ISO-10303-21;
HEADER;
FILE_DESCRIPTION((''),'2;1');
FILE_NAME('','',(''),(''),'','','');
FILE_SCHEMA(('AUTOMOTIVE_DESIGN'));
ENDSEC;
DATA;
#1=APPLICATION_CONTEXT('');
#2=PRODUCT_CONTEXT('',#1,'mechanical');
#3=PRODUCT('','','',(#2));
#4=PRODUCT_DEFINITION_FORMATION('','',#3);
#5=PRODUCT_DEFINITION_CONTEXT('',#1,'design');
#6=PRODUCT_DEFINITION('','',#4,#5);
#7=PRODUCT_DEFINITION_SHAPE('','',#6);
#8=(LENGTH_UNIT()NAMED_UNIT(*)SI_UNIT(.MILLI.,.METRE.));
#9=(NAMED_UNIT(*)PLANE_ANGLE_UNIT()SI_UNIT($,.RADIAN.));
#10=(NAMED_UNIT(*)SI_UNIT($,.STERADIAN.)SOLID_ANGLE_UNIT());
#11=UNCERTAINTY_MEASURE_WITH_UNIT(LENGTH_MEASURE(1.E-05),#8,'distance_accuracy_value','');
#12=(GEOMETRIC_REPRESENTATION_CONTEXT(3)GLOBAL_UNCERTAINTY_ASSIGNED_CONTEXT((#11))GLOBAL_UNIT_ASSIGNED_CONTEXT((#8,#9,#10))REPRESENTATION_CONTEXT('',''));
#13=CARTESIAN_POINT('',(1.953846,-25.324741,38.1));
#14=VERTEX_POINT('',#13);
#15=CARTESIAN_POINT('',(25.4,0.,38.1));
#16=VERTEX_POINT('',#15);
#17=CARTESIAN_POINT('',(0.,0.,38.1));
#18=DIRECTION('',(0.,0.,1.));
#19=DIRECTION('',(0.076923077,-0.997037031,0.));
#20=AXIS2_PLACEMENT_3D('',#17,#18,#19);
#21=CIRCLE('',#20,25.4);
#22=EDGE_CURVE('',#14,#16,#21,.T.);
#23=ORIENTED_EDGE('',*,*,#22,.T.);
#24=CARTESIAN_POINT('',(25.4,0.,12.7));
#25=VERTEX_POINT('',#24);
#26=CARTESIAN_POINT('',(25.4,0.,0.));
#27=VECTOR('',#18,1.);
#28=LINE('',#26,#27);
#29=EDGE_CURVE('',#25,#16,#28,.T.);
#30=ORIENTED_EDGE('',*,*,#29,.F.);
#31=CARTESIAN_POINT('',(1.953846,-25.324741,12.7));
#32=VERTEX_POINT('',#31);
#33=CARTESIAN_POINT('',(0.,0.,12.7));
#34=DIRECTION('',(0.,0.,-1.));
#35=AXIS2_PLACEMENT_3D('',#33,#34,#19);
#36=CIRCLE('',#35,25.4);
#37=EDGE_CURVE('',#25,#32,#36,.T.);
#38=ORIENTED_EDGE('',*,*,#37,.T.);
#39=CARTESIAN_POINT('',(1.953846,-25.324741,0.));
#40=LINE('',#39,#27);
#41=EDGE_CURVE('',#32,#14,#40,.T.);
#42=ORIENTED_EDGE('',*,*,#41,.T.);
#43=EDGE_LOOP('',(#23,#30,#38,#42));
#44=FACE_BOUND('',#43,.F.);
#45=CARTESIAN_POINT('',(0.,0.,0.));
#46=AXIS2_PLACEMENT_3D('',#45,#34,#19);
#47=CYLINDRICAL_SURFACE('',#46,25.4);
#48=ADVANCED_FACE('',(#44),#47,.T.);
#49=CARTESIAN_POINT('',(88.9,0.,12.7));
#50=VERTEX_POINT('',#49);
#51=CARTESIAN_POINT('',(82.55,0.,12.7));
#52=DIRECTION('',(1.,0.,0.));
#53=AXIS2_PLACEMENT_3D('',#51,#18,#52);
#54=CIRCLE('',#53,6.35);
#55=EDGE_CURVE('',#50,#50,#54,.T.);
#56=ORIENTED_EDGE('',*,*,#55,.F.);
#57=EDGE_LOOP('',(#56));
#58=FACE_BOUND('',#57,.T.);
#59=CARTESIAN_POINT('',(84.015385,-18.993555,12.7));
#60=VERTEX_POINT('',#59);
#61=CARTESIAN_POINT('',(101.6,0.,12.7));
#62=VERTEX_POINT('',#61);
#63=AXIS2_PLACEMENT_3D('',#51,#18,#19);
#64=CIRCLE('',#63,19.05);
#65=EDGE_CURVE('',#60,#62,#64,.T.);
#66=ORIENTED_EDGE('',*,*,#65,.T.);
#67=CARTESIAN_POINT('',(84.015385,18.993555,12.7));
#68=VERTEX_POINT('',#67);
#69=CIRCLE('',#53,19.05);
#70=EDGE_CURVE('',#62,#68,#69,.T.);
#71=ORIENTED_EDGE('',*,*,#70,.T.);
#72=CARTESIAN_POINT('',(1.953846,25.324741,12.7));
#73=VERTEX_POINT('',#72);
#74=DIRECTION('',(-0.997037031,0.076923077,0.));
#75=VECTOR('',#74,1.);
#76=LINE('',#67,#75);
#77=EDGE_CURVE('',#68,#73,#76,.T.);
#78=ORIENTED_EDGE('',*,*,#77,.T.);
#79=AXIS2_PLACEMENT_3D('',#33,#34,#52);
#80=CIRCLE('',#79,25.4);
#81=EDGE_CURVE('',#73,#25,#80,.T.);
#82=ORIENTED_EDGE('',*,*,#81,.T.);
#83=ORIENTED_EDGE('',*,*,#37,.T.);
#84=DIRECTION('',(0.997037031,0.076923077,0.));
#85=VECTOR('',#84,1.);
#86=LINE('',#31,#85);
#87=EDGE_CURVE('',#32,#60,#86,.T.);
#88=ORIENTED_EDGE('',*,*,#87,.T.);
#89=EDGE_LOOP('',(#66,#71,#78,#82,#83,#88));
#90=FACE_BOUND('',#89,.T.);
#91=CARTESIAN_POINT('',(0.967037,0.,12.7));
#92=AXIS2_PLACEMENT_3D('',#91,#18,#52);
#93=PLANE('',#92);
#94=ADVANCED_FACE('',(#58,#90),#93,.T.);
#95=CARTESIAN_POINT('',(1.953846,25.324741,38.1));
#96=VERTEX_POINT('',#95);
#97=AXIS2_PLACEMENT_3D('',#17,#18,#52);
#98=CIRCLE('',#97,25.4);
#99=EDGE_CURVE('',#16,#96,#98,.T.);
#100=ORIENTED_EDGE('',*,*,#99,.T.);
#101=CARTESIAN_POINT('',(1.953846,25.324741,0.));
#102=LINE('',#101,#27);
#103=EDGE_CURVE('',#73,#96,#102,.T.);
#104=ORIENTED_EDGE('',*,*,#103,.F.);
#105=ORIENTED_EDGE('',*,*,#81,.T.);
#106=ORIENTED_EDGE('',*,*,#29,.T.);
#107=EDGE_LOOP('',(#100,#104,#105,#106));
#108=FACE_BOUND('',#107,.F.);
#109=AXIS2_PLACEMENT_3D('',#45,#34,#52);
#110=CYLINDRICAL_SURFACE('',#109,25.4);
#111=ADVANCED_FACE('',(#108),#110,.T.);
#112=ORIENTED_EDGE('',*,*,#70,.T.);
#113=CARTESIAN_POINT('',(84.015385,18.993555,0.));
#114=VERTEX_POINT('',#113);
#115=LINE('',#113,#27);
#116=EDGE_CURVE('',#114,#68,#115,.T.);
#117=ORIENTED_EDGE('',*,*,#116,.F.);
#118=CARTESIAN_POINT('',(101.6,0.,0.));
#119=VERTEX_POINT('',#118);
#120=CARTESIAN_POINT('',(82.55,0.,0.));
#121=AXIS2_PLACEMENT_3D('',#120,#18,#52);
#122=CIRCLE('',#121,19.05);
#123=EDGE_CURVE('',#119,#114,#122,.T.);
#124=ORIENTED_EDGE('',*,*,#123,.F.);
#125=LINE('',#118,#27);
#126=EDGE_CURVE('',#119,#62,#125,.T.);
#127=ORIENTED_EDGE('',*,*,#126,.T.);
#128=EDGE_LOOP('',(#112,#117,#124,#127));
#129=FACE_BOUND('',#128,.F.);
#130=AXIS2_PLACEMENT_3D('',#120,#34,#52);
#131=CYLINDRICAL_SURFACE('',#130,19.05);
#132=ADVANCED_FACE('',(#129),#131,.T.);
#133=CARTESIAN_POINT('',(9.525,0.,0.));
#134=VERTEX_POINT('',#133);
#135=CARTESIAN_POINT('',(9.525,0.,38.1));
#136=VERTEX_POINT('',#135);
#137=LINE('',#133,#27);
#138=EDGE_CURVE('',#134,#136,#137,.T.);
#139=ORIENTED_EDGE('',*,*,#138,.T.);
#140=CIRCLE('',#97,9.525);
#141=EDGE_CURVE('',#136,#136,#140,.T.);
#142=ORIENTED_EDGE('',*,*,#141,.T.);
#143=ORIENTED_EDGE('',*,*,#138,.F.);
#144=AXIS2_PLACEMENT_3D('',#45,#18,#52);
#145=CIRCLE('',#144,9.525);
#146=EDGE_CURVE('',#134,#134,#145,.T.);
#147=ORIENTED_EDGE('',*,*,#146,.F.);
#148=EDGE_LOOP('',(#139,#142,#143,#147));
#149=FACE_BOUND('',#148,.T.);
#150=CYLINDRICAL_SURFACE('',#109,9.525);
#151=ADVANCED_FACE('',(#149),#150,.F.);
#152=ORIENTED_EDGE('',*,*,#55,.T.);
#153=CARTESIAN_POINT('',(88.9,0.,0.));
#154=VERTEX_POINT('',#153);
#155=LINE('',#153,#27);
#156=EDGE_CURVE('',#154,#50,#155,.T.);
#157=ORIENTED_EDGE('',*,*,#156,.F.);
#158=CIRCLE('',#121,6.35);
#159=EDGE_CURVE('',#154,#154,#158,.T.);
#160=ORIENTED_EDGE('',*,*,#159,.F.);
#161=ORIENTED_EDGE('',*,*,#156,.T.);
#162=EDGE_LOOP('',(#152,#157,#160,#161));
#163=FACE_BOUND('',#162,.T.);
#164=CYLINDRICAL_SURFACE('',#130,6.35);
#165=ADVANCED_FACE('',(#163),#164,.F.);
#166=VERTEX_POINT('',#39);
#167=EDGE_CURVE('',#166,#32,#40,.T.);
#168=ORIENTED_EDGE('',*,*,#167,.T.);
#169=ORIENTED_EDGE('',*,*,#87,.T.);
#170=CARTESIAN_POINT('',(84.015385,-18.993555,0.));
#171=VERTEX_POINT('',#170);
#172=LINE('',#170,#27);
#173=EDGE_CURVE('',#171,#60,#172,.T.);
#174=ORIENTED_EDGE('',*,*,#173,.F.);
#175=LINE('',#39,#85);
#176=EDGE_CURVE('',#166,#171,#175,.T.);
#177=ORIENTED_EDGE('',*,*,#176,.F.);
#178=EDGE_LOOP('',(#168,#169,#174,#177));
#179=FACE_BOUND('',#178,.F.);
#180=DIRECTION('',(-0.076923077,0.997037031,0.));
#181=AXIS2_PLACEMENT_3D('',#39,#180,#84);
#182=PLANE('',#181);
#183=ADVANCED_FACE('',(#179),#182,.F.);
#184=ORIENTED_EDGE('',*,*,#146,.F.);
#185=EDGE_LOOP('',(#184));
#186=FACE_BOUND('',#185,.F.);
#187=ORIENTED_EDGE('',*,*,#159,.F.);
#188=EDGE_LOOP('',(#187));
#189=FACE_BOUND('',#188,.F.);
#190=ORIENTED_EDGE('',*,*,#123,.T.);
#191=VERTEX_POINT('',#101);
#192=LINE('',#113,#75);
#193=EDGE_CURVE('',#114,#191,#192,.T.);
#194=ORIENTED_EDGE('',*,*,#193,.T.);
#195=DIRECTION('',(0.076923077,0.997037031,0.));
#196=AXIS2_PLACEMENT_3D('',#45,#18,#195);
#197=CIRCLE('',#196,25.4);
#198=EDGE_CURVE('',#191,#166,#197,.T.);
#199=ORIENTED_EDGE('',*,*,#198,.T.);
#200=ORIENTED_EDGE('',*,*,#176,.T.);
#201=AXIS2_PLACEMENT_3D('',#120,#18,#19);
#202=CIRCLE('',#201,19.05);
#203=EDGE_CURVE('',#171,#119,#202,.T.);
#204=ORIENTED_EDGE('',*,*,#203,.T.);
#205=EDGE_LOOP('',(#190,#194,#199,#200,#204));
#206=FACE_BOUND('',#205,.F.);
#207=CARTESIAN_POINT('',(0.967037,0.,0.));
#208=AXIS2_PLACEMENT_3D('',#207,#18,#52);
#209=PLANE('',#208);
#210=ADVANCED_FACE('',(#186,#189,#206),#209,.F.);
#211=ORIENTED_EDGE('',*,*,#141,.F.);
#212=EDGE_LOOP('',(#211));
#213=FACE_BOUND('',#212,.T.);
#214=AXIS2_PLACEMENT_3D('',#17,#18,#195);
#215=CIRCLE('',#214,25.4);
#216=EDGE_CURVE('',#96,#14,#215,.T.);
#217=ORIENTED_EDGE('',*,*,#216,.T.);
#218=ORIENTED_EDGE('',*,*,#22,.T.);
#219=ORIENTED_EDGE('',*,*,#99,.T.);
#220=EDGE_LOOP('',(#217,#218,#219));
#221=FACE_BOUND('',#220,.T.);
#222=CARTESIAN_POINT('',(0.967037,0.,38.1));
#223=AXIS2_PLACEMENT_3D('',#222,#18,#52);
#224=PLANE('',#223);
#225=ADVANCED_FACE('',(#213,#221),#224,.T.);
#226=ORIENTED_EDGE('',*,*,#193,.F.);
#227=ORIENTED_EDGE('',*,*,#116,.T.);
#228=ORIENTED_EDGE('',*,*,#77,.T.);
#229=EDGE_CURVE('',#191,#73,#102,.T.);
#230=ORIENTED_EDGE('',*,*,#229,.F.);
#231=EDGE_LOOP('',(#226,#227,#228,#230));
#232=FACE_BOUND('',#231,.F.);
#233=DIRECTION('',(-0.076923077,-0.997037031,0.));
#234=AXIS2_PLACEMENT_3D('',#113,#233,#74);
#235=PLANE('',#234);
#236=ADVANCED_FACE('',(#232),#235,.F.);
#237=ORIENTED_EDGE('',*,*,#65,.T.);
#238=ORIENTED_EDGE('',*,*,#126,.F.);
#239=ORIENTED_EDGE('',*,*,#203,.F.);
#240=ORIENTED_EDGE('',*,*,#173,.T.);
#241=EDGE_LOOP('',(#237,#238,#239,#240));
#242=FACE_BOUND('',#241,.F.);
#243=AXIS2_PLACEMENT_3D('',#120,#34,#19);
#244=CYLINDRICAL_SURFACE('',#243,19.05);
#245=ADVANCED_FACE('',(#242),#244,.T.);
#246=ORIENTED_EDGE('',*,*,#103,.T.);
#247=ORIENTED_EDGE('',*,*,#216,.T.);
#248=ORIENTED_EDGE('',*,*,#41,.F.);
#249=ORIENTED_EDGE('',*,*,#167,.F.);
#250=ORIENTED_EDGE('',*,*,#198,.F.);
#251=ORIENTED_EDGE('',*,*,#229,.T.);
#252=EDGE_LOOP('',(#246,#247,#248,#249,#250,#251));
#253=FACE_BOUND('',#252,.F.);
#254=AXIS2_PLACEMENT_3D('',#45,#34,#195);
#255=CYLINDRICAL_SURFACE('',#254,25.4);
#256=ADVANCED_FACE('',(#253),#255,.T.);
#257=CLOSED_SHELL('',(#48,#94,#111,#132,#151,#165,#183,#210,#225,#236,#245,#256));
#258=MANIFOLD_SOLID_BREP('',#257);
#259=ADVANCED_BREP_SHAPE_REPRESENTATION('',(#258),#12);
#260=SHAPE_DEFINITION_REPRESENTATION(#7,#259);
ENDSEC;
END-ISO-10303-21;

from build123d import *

# Parameters (mm, degrees)
F0_R     = 9.525
F1_DEPTH = 38.1
F0_R_2   = 6.35
F2_DEPTH = 12.7


# Not quite as in the source:
# - a feature of the source that left no trace in its solid (it failed there, or was rolled back) is left out


with BuildPart() as f1:
    # F0 (on Top) → F1 (new body)
    with BuildSketch(Plane.XY):
        with BuildLine():
            ThreePointArc((1.9538461538, -25.3247405753), (18.6385043969, -17.2559020004), (25.4, 0))
            ThreePointArc((25.4, 0), (18.6385043969, 17.2559020004), (1.9538461538, 25.3247405753))
            ThreePointArc((1.9538461538, 25.3247405753), (-25.4, 0), (1.9538461538, -25.3247405753))
        make_face()
        Circle(F0_R, mode=Mode.SUBTRACT)
    extrude(amount=F1_DEPTH)

    # F0 (on Top) → F2 (join)
    with BuildSketch(Plane.XY):
        with BuildLine():
            ThreePointArc((1.9538461538, -25.3247405753), (18.6385043969, -17.2559020004), (25.4, 0))
            ThreePointArc((25.4, 0), (18.6385043969, 17.2559020004), (1.9538461538, 25.3247405753))
            ThreePointArc((1.9538461538, 25.3247405753), (-25.4, 0), (1.9538461538, -25.3247405753))
        make_face()
        Circle(F0_R, mode=Mode.SUBTRACT)
        with BuildLine():
            ThreePointArc((1.9538461538, 25.3247405753), (18.6385043969, 17.2559020004), (25.4, 0))
            ThreePointArc((25.4, 0), (18.6385043969, -17.2559020004), (1.9538461538, -25.3247405753))
            Line((1.9538461538, -25.3247405753), (84.0153846154, -18.9935554315))
            ThreePointArc((84.0153846154, -18.9935554315), (63.5, 0), (84.0153846154, 18.9935554315))
            Line((84.0153846154, 18.9935554315), (1.9538461538, 25.3247405753))
        make_face()
        with BuildLine():
            ThreePointArc((101.6, 0), (96.5288782977, 12.9419265003), (84.0153846154, 18.9935554315))
            ThreePointArc((84.0153846154, 18.9935554315), (63.5, 0), (84.0153846154, -18.9935554315))
            ThreePointArc((84.0153846154, -18.9935554315), (96.5288782977, -12.9419265003), (101.6, 0))
        make_face()
        with Locations((82.55, 0)):
            Circle(F0_R_2, mode=Mode.SUBTRACT)
    extrude(amount=F2_DEPTH)


solid = f1.part
